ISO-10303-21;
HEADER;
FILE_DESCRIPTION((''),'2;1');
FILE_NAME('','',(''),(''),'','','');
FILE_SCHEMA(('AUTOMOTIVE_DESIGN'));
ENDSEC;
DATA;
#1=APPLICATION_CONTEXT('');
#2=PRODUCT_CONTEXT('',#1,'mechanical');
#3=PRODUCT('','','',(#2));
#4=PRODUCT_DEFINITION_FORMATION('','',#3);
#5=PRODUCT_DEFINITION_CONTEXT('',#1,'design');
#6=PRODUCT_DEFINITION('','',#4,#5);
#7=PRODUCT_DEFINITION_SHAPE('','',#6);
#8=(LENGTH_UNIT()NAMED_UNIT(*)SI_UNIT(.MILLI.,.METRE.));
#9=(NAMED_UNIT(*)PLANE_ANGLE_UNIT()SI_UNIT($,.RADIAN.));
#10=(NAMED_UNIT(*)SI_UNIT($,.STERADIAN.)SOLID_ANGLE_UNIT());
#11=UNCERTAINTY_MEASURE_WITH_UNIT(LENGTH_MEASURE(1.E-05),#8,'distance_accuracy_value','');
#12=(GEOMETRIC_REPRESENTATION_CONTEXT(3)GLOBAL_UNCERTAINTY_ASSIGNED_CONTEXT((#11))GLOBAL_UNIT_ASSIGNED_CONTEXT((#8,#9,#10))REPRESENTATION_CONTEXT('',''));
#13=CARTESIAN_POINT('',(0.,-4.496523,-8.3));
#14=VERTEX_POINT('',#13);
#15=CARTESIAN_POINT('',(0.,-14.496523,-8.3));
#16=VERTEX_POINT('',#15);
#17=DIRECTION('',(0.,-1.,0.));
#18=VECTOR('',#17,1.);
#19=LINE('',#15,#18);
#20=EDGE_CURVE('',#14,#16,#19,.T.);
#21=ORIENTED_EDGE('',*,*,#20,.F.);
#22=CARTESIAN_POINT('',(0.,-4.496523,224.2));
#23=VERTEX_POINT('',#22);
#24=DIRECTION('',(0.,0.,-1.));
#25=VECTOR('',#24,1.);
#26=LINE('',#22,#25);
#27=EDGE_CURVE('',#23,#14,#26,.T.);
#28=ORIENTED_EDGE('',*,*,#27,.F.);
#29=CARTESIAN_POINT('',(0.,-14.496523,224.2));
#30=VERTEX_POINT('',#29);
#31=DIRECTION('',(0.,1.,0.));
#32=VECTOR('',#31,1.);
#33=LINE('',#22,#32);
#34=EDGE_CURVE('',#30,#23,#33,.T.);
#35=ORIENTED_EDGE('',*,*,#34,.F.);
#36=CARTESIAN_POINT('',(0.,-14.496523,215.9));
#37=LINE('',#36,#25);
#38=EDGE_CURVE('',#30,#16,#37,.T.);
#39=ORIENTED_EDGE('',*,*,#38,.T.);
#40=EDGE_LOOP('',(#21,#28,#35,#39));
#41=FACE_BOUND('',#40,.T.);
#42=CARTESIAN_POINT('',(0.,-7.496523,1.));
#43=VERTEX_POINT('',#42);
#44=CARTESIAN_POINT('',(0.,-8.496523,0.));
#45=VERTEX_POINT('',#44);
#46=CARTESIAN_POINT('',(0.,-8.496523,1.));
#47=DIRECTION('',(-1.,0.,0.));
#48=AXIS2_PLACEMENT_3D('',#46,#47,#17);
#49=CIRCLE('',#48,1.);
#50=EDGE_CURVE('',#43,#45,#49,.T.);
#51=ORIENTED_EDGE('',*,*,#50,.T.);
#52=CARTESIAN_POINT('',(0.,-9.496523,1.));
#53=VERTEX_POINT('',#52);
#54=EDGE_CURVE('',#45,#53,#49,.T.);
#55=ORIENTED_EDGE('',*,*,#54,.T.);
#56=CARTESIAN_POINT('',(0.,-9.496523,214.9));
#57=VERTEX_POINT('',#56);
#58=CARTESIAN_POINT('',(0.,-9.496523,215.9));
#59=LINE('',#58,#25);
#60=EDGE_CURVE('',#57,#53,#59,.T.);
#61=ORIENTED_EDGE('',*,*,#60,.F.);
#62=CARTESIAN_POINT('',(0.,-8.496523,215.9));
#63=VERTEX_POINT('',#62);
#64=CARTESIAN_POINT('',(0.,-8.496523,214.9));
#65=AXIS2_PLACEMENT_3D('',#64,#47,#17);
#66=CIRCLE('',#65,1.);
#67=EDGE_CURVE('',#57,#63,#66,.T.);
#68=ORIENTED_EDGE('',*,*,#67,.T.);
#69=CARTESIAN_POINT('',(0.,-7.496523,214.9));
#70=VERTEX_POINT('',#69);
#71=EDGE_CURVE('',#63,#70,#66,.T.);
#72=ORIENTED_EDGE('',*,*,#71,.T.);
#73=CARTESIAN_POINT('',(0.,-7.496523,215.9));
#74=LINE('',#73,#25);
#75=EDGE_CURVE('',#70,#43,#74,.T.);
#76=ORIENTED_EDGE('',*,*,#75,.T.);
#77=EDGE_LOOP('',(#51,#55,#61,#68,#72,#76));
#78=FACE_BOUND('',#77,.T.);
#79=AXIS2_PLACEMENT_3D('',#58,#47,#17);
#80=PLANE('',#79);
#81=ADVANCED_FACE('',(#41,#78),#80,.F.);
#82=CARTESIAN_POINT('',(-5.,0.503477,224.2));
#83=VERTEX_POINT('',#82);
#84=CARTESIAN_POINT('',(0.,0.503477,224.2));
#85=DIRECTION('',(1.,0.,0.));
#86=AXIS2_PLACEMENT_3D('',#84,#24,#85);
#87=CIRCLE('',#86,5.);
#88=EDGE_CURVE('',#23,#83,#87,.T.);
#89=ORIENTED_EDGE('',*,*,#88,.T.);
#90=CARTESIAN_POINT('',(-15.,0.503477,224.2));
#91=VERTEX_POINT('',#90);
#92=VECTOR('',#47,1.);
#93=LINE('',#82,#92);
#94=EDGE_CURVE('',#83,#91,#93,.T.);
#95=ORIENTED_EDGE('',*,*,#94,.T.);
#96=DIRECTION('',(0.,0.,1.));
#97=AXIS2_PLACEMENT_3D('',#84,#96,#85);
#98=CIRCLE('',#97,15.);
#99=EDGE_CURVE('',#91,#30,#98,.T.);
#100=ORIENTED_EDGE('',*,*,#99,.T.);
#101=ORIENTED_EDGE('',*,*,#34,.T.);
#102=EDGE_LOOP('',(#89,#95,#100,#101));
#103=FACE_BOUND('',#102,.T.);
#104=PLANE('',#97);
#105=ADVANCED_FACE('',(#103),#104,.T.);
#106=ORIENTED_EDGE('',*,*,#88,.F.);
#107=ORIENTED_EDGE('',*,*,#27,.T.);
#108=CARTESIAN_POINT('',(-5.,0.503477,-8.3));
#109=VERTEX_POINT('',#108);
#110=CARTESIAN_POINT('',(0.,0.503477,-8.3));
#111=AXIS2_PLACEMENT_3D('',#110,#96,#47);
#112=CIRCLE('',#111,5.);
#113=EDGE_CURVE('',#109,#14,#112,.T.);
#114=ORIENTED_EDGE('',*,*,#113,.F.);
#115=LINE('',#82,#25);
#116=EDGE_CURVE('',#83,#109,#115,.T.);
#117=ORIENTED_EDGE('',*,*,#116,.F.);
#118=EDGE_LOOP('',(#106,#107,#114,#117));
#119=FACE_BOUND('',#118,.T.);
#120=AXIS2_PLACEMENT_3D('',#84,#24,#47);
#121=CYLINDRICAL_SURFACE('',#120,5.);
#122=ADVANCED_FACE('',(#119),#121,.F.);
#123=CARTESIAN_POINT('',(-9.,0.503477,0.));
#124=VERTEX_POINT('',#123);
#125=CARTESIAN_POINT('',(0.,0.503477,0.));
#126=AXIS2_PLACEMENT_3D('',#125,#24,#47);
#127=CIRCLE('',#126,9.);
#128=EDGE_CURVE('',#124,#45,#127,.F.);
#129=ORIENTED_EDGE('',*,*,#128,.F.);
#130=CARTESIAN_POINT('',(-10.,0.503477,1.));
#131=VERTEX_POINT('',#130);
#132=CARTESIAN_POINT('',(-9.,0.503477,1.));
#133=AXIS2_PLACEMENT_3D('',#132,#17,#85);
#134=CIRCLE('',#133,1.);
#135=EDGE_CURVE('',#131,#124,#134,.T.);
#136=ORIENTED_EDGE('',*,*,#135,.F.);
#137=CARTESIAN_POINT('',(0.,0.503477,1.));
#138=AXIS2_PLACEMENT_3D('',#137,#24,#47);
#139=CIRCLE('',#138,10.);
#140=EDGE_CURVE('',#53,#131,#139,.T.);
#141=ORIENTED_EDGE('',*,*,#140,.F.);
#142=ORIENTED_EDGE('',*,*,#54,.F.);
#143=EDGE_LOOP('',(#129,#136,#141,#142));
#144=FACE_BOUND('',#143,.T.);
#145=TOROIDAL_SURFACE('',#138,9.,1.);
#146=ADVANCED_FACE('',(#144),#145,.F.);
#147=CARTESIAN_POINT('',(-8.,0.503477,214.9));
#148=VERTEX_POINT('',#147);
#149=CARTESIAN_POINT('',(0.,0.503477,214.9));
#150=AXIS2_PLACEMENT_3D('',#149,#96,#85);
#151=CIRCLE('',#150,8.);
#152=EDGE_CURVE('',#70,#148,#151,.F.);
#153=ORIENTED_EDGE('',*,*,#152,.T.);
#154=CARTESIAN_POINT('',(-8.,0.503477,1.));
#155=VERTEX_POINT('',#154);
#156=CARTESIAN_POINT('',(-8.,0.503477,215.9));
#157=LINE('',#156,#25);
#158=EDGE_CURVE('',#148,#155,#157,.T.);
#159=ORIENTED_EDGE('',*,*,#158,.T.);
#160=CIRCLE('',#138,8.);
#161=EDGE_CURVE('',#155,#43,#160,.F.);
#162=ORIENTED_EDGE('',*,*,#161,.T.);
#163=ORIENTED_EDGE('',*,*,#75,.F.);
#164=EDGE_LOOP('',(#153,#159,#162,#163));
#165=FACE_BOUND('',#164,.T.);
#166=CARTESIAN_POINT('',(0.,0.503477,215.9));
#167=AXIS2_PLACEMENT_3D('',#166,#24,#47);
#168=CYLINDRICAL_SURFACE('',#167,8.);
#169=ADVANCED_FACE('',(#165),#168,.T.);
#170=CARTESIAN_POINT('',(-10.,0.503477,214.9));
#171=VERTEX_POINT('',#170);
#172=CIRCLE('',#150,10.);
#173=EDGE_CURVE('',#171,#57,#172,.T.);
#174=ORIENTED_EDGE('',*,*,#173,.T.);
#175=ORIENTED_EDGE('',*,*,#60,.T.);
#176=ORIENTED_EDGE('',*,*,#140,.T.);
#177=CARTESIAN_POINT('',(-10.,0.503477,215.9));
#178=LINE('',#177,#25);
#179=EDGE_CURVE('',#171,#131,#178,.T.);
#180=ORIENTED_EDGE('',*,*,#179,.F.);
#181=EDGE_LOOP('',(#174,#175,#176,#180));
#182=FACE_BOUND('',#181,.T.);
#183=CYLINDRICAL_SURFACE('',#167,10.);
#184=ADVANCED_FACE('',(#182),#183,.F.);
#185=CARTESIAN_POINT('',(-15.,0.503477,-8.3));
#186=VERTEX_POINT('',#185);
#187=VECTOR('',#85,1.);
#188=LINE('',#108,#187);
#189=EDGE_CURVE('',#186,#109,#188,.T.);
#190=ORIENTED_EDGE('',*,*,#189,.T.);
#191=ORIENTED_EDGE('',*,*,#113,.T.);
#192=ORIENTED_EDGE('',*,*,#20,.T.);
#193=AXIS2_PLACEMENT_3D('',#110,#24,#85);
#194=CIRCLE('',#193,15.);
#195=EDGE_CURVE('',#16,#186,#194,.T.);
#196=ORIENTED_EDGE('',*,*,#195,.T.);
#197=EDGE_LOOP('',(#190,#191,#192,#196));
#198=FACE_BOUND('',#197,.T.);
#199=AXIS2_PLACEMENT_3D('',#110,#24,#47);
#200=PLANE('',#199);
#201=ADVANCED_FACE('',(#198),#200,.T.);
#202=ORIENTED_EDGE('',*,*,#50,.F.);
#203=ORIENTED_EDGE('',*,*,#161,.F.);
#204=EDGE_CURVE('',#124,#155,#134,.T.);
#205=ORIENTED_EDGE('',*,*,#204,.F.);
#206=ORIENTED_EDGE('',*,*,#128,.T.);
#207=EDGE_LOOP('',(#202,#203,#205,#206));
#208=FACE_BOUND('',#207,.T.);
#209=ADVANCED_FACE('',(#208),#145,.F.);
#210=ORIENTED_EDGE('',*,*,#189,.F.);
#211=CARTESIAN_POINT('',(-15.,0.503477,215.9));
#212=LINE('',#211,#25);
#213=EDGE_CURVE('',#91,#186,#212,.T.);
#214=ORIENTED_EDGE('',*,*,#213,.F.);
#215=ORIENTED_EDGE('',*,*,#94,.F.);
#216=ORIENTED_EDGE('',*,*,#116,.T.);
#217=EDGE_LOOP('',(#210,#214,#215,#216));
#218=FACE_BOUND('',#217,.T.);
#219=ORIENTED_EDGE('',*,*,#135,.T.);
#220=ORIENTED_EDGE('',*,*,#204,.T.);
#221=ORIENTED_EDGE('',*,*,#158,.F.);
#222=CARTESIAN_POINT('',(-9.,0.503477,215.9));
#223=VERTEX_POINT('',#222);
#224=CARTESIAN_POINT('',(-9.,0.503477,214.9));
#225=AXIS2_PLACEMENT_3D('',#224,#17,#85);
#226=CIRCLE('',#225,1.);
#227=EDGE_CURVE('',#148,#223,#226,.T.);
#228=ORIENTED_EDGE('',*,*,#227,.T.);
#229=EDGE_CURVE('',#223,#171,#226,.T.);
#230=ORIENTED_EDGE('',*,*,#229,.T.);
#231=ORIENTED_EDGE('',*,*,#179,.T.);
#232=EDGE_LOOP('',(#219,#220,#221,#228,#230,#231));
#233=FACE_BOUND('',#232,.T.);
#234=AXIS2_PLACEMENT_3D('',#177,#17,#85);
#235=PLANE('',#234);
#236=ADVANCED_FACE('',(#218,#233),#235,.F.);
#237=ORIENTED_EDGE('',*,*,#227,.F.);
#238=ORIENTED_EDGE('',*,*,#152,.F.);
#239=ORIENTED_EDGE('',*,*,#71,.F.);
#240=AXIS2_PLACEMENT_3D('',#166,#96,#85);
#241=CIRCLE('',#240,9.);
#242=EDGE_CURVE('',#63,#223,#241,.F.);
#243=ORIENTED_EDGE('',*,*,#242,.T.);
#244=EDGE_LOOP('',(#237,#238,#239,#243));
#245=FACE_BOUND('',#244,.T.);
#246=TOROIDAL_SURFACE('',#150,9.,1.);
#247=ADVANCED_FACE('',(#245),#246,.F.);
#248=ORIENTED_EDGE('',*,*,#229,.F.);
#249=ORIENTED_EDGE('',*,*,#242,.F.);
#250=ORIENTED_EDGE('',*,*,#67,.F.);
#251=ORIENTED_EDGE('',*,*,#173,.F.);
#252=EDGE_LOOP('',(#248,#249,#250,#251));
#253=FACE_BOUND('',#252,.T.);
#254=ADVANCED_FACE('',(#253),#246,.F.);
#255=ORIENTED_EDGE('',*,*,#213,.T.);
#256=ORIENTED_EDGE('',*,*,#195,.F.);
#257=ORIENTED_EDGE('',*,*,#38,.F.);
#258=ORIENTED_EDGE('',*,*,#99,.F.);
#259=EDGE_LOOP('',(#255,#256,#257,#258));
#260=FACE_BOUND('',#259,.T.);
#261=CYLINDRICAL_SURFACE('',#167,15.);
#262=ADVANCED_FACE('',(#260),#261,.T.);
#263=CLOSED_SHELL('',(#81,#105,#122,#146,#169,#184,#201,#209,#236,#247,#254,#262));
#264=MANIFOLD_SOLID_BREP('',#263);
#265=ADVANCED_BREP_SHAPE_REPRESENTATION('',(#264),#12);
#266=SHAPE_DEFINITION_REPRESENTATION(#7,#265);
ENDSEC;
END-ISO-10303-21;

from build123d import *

# Parameters (mm, degrees)
BOSS_EXTRUDE1_DEPTH   = 215.9
BOSS_EXTRUDE1_2_DEPTH = 215.9
BOSS_EXTRUDE2_DEPTH   = 8.3
BOSS_EXTRUDE3_START   = 8.3
BOSS_EXTRUDE3_DEPTH   = 8.3
FILLET1_R             = 1


with BuildPart() as part:
    # Sketch1 → Boss-Extrude1 (new body)
    with BuildSketch(Plane.XY):
        with BuildLine():
            Line((-5, 0.503476918), (-8, 0.503476918))
            ThreePointArc((-8, 0.503476918), (-5.656854249, -5.153377331), (0, -7.496523082))
            Line((0, -7.496523082), (0, -4.496523082))
            ThreePointArc((0, -4.496523082), (-3.535533906, -3.032056988), (-5, 0.503476918))
        make_face()
    extrude(amount=BOSS_EXTRUDE1_DEPTH)



with BuildPart() as body_2:
    # Sketch1 → Boss-Extrude1 2 (new body)
    with BuildSketch(Plane.XY):
        with BuildLine():
            Line((-10, 0.503476918), (-15, 0.503476918))
            ThreePointArc((-15, 0.503476918), (-10.606601718, -10.1031248), (0, -14.496523082))
            Line((0, -14.496523082), (0, -9.496523082))
            ThreePointArc((0, -9.496523082), (-7.071067812, -6.567590894), (-10, 0.503476918))
        make_face()
    extrude(amount=BOSS_EXTRUDE1_2_DEPTH)


with BuildPart() as part_1:
    add(part.part)

    add(body_2.part)  # Boss-Extrude2 merges body 2
    # Sketch2 → Boss-Extrude2 (add)
    with BuildSketch(Plane.XY.offset(215.9)):
        with BuildLine():
            Line((-5, 0.503476918), (-15, 0.503476918))
            ThreePointArc((-15, 0.503476918), (-10.606601718, -10.1031248), (0, -14.496523082))
            Line((0, -14.496523082), (0, -4.496523082))
            ThreePointArc((0, -4.496523082), (-3.535533906, -3.032056988), (-5, 0.503476918))
        make_face()
    extrude(amount=BOSS_EXTRUDE2_DEPTH)

    # Sketch3 → Boss-Extrude3 (add)
    with BuildSketch(Plane(origin=(0, 0, 0), x_dir=(-1, 0, 0), z_dir=(0, 0, -1)).offset(BOSS_EXTRUDE3_START)):
        with BuildLine():
            Line((5, 0.503476918), (15, 0.503476918))
            ThreePointArc((15, 0.503476918), (10.606601718, -10.1031248), (0, -14.496523082))
            Line((0, -14.496523082), (0, -4.496523082))
            ThreePointArc((0, -4.496523082), (3.535533906, -3.032056988), (5, 0.503476918))
        make_face()
    extrude(amount=-BOSS_EXTRUDE3_DEPTH)

    # Fillet1
    fillet1_edges = [part_1.edges().sort_by_distance(p)[0] for p in [
        (-5.656854249, -5.153377331, 0),
        (-7.071067812, -6.567590894, 0),
        (-5.656854249, -5.153377331, 215.9),
        (-7.071067812, -6.567590894, 215.9),
    ]]
    fillet(fillet1_edges, radius=FILLET1_R - 0.0001)  # a hair under: the kernel refuses the full size


solid = part_1.part
